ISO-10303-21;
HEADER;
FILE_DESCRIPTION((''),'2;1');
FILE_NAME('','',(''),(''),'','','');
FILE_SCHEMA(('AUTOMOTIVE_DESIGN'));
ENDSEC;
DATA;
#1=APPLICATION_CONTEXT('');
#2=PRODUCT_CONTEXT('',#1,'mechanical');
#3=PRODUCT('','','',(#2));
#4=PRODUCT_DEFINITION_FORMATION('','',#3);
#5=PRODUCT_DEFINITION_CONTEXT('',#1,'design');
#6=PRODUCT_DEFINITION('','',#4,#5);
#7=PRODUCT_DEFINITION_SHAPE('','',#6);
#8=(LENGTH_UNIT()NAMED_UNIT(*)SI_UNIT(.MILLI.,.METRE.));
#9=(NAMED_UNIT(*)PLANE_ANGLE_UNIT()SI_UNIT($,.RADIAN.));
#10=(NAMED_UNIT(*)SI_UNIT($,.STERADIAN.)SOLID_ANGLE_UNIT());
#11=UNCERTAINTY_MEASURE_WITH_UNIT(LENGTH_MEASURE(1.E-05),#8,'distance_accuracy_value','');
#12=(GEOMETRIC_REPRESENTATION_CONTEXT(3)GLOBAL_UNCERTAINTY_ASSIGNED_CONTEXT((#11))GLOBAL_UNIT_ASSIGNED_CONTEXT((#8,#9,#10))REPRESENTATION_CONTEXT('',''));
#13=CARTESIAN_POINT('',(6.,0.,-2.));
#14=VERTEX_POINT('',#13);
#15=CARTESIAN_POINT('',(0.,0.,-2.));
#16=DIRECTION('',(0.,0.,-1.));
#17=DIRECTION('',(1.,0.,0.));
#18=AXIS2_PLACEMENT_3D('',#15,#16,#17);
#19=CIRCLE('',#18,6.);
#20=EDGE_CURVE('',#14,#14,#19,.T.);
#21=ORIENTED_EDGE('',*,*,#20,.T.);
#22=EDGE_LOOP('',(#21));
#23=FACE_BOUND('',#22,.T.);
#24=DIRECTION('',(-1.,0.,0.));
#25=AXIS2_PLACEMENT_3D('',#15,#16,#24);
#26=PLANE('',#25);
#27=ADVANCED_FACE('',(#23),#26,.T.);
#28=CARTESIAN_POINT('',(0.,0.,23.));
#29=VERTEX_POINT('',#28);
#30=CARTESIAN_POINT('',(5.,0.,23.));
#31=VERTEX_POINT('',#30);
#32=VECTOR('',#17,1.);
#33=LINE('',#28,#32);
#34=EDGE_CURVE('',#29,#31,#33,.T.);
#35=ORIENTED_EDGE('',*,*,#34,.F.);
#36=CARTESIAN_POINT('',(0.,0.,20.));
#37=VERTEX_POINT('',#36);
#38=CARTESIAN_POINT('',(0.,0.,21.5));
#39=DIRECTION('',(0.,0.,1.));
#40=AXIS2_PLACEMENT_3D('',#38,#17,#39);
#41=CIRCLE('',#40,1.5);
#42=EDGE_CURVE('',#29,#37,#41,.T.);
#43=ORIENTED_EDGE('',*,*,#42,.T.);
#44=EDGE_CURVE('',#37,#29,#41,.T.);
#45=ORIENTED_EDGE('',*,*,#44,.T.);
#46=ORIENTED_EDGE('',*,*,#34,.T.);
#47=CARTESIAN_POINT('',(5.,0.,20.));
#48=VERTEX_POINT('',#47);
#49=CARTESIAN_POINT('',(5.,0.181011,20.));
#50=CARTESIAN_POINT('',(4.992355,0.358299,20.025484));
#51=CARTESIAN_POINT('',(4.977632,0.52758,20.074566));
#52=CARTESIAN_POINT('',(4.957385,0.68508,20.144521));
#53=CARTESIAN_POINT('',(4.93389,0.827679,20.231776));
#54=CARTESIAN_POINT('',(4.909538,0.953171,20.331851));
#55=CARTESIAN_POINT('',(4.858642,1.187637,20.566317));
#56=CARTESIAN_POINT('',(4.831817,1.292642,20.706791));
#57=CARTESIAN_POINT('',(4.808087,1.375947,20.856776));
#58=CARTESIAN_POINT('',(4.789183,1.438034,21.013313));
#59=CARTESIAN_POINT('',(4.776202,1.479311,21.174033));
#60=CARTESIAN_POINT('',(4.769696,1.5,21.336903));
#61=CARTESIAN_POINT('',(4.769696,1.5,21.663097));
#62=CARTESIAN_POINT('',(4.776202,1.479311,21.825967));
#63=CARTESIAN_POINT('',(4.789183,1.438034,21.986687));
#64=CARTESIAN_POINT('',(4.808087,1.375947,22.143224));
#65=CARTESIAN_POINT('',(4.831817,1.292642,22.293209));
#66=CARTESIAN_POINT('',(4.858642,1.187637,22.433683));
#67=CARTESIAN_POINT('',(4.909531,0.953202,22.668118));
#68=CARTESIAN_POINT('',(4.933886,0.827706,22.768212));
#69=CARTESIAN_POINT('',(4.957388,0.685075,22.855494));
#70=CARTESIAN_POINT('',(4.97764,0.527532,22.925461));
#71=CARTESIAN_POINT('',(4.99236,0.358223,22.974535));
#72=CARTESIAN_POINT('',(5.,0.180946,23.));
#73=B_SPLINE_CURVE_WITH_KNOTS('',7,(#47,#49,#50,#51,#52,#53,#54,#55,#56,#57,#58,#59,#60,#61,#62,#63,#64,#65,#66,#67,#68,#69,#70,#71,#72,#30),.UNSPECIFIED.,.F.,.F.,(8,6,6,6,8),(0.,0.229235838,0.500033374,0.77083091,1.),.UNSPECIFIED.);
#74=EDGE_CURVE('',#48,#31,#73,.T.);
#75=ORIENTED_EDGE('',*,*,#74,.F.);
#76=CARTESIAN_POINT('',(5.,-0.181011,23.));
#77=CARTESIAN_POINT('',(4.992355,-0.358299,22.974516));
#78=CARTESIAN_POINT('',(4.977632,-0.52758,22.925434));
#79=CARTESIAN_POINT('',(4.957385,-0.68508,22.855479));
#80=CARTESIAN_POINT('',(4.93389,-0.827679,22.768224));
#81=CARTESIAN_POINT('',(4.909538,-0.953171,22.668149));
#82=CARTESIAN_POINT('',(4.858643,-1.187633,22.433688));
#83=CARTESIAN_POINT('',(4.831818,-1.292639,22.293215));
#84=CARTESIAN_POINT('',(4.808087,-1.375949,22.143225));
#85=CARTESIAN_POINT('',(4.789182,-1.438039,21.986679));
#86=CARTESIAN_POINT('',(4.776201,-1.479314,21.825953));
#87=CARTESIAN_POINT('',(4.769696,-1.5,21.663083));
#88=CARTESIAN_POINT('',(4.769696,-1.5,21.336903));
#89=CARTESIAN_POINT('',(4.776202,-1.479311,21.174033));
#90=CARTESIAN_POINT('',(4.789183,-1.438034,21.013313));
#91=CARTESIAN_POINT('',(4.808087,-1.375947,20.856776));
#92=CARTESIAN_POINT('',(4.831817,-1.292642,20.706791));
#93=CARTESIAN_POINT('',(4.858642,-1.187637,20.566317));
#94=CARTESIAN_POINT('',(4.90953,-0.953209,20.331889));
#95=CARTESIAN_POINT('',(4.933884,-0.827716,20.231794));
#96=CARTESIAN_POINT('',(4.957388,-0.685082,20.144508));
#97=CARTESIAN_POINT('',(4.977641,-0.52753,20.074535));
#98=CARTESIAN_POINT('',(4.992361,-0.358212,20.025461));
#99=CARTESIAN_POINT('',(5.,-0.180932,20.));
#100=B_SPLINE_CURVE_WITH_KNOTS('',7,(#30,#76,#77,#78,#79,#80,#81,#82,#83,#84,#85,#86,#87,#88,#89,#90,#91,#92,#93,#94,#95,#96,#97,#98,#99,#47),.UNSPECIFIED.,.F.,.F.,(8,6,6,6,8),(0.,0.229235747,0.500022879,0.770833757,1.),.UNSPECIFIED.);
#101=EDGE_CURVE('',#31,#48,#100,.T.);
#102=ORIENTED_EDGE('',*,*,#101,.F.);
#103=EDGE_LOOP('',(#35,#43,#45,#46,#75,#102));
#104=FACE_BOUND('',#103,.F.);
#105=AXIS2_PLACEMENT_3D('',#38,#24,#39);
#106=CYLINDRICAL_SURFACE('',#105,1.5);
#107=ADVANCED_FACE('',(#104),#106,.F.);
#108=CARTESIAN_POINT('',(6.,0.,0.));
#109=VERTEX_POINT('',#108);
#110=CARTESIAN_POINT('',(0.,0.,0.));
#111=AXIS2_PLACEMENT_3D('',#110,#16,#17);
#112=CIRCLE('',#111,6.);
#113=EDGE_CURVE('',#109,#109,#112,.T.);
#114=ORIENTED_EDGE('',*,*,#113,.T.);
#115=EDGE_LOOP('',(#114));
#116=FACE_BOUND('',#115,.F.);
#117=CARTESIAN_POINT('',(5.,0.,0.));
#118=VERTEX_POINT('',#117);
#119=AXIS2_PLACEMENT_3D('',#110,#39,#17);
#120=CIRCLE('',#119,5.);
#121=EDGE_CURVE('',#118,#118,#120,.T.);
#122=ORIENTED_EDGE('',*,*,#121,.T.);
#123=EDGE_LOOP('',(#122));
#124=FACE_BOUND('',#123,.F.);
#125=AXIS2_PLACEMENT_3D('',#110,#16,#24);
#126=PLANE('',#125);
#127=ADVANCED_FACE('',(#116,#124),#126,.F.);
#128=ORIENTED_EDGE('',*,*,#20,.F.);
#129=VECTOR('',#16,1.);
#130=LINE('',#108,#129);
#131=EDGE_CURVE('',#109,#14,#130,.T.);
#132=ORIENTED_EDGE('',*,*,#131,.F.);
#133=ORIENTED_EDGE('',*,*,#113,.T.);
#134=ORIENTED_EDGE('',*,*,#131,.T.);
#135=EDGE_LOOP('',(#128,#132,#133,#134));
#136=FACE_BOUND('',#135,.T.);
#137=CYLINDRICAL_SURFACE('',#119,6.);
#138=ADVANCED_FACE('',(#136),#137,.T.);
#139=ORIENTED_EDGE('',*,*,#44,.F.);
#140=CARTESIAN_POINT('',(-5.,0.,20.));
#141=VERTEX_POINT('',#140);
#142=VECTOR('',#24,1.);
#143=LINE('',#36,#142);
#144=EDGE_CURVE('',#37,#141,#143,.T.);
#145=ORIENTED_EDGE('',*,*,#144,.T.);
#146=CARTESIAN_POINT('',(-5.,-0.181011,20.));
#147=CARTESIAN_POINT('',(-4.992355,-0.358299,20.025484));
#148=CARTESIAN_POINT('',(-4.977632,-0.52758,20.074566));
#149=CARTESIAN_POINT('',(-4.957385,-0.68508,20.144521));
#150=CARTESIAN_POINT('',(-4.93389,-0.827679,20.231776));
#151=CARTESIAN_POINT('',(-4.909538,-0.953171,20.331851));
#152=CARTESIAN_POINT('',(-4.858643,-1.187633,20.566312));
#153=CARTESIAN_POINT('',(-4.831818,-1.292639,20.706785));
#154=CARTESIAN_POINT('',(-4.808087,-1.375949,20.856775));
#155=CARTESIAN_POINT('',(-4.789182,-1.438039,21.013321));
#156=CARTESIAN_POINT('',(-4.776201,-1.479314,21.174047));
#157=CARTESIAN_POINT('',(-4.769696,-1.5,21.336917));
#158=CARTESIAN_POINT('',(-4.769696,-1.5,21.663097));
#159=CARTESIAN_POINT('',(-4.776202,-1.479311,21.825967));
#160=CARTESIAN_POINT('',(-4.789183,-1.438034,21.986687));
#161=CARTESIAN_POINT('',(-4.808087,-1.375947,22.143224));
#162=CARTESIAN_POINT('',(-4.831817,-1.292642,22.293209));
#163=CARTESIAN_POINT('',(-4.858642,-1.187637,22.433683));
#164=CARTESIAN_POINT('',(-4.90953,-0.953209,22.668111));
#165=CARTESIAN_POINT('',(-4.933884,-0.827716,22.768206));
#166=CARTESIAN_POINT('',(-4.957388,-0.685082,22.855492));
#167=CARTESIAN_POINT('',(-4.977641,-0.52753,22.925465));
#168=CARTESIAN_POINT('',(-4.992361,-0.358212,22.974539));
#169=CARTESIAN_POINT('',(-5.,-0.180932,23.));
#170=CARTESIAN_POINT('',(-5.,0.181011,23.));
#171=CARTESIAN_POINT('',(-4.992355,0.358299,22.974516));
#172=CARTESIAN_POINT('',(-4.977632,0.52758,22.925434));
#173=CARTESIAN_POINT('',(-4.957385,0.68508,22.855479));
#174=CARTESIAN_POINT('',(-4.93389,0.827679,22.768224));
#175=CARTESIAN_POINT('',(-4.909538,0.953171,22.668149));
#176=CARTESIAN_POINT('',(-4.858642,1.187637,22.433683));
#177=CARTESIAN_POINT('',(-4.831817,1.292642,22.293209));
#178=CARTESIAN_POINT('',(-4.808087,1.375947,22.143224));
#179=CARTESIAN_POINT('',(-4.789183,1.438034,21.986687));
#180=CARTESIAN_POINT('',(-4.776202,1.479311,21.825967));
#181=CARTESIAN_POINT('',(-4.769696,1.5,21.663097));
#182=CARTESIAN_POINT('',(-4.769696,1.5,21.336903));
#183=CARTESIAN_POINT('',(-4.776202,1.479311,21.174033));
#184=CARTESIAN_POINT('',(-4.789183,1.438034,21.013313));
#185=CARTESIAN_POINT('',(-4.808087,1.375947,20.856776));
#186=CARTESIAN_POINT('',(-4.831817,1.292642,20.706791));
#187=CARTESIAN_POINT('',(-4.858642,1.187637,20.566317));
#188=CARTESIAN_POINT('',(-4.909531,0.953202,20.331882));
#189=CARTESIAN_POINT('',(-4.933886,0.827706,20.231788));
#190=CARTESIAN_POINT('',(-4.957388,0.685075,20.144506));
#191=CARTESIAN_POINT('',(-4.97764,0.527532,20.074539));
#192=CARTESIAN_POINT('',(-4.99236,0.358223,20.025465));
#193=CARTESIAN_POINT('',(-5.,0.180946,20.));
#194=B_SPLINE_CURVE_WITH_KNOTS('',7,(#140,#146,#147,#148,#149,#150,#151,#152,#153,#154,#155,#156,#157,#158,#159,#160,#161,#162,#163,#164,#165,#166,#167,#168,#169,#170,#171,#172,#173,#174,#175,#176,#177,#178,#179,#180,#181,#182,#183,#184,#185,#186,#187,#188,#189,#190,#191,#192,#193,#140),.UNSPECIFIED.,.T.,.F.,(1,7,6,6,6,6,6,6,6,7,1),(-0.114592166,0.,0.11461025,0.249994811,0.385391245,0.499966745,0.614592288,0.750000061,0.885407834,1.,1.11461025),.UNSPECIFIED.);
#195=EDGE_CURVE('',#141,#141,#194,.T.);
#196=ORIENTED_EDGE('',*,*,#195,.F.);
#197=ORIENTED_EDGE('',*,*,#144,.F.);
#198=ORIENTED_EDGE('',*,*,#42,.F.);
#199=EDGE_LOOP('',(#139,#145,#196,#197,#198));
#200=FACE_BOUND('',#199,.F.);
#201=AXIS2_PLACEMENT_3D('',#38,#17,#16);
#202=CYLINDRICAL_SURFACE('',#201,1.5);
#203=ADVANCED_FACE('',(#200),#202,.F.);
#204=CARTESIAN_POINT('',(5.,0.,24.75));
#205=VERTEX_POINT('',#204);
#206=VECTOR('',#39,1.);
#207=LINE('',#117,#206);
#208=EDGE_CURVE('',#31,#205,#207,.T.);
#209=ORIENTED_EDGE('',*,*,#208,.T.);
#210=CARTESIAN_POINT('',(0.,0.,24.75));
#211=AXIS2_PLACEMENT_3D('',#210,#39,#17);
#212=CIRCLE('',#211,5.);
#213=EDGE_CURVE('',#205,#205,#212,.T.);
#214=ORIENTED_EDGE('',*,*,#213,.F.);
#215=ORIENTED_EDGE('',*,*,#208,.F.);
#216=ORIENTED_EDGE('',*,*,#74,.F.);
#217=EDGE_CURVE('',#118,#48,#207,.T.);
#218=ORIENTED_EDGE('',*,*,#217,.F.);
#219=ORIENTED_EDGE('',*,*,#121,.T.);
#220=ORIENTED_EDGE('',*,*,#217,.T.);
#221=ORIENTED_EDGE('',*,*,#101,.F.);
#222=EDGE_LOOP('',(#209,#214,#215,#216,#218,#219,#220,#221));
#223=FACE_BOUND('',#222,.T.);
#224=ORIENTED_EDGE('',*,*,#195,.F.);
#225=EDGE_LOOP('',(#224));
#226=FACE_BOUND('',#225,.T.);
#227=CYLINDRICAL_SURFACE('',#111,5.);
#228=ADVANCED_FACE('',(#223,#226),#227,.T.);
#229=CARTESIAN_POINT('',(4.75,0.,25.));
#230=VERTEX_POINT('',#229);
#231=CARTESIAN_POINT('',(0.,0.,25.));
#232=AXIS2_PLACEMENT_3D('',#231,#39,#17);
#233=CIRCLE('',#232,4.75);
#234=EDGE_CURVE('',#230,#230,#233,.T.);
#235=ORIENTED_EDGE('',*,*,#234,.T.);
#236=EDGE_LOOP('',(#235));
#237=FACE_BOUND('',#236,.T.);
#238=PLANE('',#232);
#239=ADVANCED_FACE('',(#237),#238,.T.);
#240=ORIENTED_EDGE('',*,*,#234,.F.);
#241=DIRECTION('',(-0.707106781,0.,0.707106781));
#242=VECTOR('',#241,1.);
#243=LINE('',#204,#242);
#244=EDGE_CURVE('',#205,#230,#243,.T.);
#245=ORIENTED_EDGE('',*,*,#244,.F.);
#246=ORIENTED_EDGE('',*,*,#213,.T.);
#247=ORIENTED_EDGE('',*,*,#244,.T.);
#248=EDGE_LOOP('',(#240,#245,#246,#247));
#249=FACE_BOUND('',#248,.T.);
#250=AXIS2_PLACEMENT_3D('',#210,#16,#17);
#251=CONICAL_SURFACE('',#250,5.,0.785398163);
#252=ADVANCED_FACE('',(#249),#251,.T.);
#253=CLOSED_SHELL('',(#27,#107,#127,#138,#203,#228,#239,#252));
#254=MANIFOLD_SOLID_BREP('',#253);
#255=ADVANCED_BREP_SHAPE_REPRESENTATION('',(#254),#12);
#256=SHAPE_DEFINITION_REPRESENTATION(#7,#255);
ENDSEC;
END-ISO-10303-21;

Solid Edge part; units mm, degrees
sketch "Sketch1" plane through (0, 0, 0) normal (0, 0, 1) x (1, 0, 0)
  circle A0 centre (0, 0) radius 5
extrude "Protrusion1" add sketch "Sketch1" along normal blind 25
sketch "Sketch2" plane through (0, 0, 0) normal (0, 0, -1) x (1, 0, 0)
  circle A0 centre (0, 0) radius 6
extrude "Protrusion2" add sketch "Sketch2" along normal blind 2
hole "Hole1" at (0, 0, 21.5) direction (1, 0, 0) diameter 3 end through all both ways yes
chamfer "Chamfer1" distance 0.25 angle 45 1 edges at (-5, 0, 25)
properties part number "87451"
